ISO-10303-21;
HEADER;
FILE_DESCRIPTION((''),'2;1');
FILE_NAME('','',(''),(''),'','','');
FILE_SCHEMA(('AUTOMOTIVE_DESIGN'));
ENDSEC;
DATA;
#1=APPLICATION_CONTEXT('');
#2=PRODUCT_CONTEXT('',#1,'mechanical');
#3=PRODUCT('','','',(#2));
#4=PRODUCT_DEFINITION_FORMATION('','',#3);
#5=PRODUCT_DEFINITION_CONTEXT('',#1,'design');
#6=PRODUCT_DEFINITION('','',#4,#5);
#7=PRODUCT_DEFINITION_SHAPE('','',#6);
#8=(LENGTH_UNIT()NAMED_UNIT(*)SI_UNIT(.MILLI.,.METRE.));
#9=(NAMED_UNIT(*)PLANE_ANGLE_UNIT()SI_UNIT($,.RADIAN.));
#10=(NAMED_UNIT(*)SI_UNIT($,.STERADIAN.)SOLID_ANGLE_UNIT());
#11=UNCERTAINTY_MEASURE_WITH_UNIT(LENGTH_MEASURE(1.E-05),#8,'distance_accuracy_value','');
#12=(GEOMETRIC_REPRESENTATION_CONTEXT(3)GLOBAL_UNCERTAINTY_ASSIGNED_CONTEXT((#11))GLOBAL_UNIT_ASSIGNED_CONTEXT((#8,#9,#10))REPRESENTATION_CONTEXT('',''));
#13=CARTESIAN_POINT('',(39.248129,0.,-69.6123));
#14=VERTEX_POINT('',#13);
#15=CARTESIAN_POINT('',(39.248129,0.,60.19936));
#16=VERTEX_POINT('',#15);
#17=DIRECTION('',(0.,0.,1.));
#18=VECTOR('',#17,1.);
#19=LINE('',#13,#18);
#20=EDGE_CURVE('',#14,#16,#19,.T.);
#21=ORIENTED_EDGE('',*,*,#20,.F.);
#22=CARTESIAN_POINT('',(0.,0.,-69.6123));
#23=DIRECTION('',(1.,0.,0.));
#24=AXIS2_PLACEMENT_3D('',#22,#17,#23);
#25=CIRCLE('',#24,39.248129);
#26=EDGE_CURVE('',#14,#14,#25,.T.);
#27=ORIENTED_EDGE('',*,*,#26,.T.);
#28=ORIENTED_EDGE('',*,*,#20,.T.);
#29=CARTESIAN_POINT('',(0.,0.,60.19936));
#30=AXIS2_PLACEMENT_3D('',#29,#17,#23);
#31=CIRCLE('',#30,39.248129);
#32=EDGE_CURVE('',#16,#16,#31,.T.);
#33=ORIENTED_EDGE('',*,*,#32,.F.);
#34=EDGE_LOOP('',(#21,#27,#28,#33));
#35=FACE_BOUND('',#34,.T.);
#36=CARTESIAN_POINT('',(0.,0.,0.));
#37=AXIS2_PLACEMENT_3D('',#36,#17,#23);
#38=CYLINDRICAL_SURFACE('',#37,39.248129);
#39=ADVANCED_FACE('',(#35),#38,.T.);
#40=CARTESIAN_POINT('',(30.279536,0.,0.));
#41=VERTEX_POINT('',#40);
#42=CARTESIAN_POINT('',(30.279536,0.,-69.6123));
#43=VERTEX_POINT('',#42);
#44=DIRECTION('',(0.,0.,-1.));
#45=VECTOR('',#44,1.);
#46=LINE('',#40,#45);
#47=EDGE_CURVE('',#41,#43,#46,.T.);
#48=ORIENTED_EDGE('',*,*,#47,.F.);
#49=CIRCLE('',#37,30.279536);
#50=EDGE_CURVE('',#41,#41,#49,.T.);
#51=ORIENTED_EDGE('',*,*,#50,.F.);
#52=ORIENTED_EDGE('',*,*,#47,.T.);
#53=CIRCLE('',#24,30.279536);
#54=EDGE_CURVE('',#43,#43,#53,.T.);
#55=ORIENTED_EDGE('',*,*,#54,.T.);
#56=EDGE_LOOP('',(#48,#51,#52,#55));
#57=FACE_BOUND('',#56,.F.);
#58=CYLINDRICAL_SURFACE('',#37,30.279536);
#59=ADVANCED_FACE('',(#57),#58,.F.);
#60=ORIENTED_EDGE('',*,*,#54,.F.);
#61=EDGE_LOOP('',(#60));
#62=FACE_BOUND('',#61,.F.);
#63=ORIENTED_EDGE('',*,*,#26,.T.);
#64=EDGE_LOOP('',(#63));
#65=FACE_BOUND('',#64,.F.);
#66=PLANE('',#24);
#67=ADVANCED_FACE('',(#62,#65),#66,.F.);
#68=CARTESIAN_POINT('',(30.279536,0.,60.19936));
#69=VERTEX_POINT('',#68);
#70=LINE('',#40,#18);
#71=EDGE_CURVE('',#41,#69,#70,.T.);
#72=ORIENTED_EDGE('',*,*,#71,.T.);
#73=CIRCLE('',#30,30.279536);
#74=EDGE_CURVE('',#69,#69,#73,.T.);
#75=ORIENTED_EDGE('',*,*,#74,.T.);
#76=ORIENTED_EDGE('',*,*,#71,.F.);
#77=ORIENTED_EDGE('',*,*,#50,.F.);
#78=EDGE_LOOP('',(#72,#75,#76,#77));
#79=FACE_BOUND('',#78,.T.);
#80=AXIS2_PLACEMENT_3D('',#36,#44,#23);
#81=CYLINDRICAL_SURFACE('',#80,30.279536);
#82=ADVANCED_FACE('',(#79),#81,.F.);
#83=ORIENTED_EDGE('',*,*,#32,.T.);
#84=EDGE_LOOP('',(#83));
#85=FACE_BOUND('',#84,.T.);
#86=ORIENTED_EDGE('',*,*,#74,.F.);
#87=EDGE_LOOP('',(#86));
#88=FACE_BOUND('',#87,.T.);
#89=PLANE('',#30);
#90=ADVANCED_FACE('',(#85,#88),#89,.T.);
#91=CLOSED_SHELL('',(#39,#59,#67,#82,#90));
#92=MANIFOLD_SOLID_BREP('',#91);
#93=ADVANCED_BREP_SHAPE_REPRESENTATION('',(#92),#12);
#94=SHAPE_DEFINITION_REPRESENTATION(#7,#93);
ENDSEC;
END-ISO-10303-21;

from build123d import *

# Parameters (mm, degrees)
F0_R          = 39.2481285359
F0_R_2        = 30.2795361801
F1_DEPTH      = 60.19936
F1_DEPTH_BACK = 69.6123


# Not quite as in the source:
# - a feature of the source that left no trace in its solid (it failed there, or was rolled back) is left out


with BuildPart() as f1:
    # F0 (on Top) → F1 (new body, two sides)
    with BuildSketch(Plane.XY) as f1_sk:
        Circle(F0_R)
        Circle(F0_R_2, mode=Mode.SUBTRACT)
    extrude(amount=F1_DEPTH)
    extrude(f1_sk.sketch, amount=-F1_DEPTH_BACK)


solid = f1.part
